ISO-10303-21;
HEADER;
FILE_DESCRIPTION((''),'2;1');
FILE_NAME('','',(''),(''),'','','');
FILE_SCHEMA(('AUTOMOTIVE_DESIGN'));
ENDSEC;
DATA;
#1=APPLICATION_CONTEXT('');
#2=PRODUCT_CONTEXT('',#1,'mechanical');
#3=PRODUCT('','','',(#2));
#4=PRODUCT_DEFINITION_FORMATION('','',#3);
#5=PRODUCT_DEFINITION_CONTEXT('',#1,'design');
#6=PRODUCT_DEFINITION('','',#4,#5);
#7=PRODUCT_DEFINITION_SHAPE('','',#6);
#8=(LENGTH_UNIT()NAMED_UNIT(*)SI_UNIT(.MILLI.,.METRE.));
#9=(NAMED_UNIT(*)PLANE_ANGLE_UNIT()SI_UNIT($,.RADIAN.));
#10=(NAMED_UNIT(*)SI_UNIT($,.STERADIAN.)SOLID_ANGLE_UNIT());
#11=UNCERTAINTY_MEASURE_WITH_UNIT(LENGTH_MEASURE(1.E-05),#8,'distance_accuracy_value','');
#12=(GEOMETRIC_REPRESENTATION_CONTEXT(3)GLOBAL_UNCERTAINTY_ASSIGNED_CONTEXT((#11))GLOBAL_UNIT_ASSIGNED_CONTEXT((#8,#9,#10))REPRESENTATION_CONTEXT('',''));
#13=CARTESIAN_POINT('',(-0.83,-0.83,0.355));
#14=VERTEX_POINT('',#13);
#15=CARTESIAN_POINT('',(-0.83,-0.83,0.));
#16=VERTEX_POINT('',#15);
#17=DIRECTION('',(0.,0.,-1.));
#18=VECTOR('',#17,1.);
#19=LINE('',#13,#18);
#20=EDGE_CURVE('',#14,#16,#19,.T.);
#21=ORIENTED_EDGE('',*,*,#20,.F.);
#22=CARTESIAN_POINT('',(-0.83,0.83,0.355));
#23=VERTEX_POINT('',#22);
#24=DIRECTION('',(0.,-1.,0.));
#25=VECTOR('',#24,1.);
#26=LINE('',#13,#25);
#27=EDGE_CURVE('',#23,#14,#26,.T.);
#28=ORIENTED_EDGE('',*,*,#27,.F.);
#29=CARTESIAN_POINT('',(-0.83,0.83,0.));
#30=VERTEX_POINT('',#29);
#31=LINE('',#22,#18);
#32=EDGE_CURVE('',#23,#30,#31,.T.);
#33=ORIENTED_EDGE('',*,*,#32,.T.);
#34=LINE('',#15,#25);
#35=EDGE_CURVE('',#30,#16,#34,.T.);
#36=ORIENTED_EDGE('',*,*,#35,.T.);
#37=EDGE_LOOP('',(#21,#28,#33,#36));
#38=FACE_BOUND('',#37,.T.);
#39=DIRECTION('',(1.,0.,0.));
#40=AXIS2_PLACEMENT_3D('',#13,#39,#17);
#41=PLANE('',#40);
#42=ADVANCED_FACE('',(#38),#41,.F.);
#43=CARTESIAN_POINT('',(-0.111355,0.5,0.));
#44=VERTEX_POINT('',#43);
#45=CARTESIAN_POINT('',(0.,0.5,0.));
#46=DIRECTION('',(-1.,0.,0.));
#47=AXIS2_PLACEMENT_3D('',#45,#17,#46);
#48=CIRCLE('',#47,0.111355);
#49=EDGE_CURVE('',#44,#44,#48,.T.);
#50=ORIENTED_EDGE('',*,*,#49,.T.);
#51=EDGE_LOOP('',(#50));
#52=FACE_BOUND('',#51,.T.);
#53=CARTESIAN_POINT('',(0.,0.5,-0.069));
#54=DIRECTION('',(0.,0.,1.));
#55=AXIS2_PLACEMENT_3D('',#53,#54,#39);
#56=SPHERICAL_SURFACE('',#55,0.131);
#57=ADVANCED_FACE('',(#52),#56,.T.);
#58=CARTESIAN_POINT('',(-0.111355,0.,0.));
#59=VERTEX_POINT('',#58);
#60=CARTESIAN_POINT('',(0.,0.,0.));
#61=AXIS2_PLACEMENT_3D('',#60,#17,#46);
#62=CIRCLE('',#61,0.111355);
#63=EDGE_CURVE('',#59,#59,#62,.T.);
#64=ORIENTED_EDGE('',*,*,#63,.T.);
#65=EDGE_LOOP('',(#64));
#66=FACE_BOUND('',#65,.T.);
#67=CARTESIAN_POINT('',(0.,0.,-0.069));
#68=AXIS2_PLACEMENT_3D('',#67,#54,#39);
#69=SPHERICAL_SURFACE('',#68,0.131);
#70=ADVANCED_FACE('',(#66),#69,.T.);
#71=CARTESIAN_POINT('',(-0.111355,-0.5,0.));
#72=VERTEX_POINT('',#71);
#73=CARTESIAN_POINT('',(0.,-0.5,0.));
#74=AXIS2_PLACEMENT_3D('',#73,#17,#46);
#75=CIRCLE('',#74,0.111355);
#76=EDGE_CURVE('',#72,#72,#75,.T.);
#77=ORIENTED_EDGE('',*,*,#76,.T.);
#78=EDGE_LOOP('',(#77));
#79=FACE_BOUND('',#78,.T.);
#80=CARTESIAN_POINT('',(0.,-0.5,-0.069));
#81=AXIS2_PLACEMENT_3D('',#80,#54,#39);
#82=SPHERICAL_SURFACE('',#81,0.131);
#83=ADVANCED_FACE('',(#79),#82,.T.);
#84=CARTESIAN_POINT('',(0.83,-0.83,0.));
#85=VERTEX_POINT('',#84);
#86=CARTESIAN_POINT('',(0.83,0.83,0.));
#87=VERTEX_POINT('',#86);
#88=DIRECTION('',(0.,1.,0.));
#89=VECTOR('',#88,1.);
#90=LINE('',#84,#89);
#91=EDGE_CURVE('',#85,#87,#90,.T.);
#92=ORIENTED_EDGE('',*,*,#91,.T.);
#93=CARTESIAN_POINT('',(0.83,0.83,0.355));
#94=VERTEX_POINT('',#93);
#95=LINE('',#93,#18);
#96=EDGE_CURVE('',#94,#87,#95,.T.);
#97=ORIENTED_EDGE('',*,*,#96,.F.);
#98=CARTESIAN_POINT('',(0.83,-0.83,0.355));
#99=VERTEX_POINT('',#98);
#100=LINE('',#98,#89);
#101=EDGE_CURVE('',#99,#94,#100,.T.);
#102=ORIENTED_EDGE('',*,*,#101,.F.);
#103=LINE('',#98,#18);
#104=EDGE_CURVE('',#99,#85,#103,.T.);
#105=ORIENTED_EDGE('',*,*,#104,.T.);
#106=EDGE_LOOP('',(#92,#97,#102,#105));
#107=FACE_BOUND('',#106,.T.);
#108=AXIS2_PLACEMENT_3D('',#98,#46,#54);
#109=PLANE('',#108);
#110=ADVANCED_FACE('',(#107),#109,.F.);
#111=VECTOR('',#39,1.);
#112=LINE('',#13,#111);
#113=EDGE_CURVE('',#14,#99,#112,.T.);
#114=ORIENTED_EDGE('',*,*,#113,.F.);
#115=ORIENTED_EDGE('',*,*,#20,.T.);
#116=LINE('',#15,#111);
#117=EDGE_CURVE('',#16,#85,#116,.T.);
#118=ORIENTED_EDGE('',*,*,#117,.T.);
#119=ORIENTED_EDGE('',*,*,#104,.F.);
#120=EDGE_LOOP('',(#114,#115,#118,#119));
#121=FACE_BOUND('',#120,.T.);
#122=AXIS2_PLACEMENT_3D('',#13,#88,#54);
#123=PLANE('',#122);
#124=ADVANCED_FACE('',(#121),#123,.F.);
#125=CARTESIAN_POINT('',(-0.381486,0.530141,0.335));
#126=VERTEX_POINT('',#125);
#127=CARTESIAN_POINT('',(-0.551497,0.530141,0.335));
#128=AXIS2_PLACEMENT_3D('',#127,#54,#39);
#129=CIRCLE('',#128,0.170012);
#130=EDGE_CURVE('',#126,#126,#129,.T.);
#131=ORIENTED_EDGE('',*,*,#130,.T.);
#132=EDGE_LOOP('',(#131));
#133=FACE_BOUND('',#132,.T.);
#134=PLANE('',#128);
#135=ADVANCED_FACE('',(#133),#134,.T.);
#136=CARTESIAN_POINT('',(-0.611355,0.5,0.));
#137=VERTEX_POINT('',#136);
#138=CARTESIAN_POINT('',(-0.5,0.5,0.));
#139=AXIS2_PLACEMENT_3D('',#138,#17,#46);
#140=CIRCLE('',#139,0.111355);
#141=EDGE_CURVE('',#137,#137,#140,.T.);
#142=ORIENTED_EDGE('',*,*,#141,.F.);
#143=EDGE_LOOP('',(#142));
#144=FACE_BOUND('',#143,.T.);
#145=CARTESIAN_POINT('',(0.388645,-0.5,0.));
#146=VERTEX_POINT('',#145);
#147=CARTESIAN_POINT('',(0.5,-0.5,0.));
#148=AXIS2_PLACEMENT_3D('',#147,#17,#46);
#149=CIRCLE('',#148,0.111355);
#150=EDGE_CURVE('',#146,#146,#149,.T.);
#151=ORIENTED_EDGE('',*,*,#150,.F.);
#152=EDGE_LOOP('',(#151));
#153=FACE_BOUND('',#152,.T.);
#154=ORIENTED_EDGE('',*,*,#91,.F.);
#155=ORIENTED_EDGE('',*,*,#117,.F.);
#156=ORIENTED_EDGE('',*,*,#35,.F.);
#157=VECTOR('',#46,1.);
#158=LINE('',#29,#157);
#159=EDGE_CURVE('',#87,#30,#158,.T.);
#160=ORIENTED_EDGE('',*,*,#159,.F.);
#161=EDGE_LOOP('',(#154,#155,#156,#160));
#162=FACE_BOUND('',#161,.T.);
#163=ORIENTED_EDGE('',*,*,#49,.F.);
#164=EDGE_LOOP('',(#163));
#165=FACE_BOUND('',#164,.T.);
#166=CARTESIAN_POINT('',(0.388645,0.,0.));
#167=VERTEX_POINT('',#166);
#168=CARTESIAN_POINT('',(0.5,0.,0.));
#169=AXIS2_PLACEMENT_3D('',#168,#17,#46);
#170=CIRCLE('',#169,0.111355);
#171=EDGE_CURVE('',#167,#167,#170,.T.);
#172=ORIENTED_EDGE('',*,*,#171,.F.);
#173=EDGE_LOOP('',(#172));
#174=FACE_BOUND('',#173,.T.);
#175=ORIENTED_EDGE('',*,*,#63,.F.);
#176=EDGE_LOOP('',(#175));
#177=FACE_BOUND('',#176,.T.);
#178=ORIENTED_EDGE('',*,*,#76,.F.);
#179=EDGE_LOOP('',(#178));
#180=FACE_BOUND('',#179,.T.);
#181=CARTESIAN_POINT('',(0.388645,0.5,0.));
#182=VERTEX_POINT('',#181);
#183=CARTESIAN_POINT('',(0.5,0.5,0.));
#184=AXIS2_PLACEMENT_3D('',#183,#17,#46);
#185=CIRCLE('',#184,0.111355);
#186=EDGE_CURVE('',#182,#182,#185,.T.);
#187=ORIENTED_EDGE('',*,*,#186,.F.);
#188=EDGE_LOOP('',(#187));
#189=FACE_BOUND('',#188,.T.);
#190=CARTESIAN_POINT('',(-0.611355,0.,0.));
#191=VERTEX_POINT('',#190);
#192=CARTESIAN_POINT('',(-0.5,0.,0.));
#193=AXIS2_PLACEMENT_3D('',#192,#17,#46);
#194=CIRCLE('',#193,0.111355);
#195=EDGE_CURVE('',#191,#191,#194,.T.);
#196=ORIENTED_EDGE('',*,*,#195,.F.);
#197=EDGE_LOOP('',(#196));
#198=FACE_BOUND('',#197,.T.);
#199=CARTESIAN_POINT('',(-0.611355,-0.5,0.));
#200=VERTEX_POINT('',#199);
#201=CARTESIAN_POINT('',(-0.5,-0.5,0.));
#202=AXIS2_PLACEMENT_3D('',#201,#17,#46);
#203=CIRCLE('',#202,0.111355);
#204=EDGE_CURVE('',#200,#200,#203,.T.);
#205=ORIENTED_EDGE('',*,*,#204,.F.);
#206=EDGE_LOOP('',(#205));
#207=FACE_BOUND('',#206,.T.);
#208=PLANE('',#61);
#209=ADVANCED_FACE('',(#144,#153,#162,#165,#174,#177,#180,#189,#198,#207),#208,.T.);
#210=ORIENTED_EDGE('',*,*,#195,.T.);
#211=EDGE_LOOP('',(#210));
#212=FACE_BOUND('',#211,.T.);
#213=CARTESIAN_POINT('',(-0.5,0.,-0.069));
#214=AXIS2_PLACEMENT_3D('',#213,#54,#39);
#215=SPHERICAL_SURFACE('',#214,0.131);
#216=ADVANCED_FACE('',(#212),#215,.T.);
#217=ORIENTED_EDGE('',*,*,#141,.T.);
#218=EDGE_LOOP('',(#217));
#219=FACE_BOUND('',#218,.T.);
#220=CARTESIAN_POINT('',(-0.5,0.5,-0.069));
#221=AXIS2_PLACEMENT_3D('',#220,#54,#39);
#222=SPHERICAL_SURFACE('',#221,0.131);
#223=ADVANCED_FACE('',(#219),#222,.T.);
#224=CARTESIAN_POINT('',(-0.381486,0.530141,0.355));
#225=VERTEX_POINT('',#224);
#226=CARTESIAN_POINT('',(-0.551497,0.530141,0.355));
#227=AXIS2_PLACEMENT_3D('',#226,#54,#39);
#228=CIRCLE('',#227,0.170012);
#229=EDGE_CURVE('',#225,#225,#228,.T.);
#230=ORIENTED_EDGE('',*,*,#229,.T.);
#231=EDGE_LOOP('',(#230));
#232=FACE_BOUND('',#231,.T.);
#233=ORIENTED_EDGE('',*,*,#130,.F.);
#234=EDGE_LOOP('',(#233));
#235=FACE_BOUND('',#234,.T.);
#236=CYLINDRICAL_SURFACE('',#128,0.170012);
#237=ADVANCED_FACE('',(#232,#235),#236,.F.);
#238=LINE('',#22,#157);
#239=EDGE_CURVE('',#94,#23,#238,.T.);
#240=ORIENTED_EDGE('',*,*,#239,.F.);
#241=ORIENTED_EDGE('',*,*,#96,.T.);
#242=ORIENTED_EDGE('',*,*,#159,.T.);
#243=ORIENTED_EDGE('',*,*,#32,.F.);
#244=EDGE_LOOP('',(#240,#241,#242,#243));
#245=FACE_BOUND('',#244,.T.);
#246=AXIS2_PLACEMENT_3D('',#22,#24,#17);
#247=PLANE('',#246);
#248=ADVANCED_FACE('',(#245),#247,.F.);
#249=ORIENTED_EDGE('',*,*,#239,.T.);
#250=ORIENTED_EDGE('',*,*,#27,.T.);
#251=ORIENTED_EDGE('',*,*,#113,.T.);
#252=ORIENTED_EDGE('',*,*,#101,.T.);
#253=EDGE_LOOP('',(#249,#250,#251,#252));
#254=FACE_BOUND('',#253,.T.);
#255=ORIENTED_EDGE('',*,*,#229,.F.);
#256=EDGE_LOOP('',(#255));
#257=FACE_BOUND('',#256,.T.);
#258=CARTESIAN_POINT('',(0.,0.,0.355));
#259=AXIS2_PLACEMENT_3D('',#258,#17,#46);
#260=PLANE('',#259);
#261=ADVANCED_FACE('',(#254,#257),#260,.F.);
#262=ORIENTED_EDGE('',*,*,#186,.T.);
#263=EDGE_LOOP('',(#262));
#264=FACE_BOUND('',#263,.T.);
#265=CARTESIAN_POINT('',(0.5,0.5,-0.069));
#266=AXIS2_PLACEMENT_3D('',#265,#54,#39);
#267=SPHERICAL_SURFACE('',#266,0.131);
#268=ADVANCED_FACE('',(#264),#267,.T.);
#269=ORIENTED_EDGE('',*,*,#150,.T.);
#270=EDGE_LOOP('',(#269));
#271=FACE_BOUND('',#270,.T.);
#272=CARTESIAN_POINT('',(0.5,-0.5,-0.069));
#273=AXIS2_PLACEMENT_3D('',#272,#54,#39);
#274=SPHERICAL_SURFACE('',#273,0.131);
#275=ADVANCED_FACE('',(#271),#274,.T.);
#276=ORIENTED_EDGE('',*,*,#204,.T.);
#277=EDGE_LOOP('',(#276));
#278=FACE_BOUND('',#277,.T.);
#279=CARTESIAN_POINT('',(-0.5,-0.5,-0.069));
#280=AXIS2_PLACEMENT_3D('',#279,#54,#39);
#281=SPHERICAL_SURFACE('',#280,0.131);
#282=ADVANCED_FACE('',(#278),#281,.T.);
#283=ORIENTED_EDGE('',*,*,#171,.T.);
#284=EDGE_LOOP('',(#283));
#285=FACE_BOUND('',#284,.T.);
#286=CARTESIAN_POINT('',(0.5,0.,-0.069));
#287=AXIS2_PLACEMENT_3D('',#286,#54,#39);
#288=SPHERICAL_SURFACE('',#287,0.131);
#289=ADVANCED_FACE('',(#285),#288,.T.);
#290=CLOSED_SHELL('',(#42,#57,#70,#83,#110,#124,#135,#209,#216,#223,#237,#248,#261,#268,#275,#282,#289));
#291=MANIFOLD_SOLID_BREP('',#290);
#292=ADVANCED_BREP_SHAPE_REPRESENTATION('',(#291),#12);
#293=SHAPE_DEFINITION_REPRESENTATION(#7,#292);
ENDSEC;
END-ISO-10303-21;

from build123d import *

# Parameters (mm, degrees)
SKETCH1_W           = 1.66
SKETCH1_H           = 1.66
BOSS_EXTRUDE1_DEPTH = 0.355
LPATTERN1_COUNT     = 2
LPATTERN1_PITCH     = 0.5
LPATTERN1_COL_COUNT = 2
LPATTERN1_COL_PITCH = 0.5
SKETCH3_R           = 0.170011755
CUT_EXTRUDE1_DEPTH  = 0.02


with BuildPart() as part:
    # Sketch1 → Boss-Extrude1 (new body)
    with BuildSketch(Plane.XY):
        Rectangle(SKETCH1_W, SKETCH1_H)
    extrude(amount=BOSS_EXTRUDE1_DEPTH)

    # Sketch2 → Revolve1 (revolve)
    with BuildSketch(Plane(origin=(0, 0, 0), x_dir=(1, 0, 0), z_dir=(0, 1, 0))):
        with BuildLine():
            Line((0, 0.2), (0, 0))
            Line((0, 0), (0.111355287, 0))
            ThreePointArc((0.111355287, 0), (0.114455231, 0.132725976), (0, 0.2))
        make_face()
    revolve1 = revolve(axis=Axis((0, 0, 0), (0, 0, -1)))

    # LPattern1: Revolve1 ×2
    with Locations(*[(0, i * LPATTERN1_PITCH, 0) for i in range(1, LPATTERN1_COUNT)]):
        add(revolve1)

    # LPattern1 col: Revolve1 ×2
    with Locations(*[(0, -i * LPATTERN1_COL_PITCH, 0) for i in range(1, LPATTERN1_COL_COUNT)]):
        add(revolve1)

    # LPattern2 copy 1 sketch → LPattern2 copy 1 (revolve)
    with BuildSketch(Plane(origin=(0.5, 0.5, 0), x_dir=(1, 0, 0), z_dir=(0, 1, 0))):
        with BuildLine():
            Line((0, 0.2), (0, 0))
            Line((0, 0), (0.111355287, 0))
            ThreePointArc((0.111355287, 0), (0.114455231, 0.132725976), (0, 0.2))
        make_face()
    revolve(axis=Axis((0.5, 0.5, 0), (0, 0, -1)))

    # LPattern2 copy 2 sketch → LPattern2 copy 2 (revolve)
    with BuildSketch(Plane(origin=(0.5, -0.5, 0), x_dir=(1, 0, 0), z_dir=(0, 1, 0))):
        with BuildLine():
            Line((0, 0.2), (0, 0))
            Line((0, 0), (0.111355287, 0))
            ThreePointArc((0.111355287, 0), (0.114455231, 0.132725976), (0, 0.2))
        make_face()
    revolve(axis=Axis((0.5, -0.5, 0), (0, 0, -1)))

    # LPattern2 copy 3 sketch → LPattern2 copy 3 (revolve)
    with BuildSketch(Plane(origin=(0.5, 0, 0), x_dir=(1, 0, 0), z_dir=(0, 1, 0))):
        with BuildLine():
            Line((0, 0.2), (0, 0))
            Line((0, 0), (0.111355287, 0))
            ThreePointArc((0.111355287, 0), (0.114455231, 0.132725976), (0, 0.2))
        make_face()
    revolve(axis=Axis((0.5, 0, 0), (0, 0, -1)))

    # LPattern3 copy 1 sketch → LPattern3 copy 1 (revolve)
    with BuildSketch(Plane(origin=(-0.5, 0.5, 0), x_dir=(1, 0, 0), z_dir=(0, 1, 0))):
        with BuildLine():
            Line((0, 0.2), (0, 0))
            Line((0, 0), (0.111355287, 0))
            ThreePointArc((0.111355287, 0), (0.114455231, 0.132725976), (0, 0.2))
        make_face()
    revolve(axis=Axis((-0.5, 0.5, 0), (0, 0, -1)))

    # LPattern3 copy 2 sketch → LPattern3 copy 2 (revolve)
    with BuildSketch(Plane(origin=(-0.5, -0.5, 0), x_dir=(1, 0, 0), z_dir=(0, 1, 0))):
        with BuildLine():
            Line((0, 0.2), (0, 0))
            Line((0, 0), (0.111355287, 0))
            ThreePointArc((0.111355287, 0), (0.114455231, 0.132725976), (0, 0.2))
        make_face()
    revolve(axis=Axis((-0.5, -0.5, 0), (0, 0, -1)))

    # LPattern3 copy 3 sketch → LPattern3 copy 3 (revolve)
    with BuildSketch(Plane(origin=(-0.5, 0, 0), x_dir=(1, 0, 0), z_dir=(0, 1, 0))):
        with BuildLine():
            Line((0, 0.2), (0, 0))
            Line((0, 0), (0.111355287, 0))
            ThreePointArc((0.111355287, 0), (0.114455231, 0.132725976), (0, 0.2))
        make_face()
    revolve(axis=Axis((-0.5, 0, 0), (0, 0, -1)))

    # Sketch3 → Cut-Extrude1 (cut)
    with BuildSketch(Plane.XY.offset(0.355)):
        with Locations((-0.551497324, 0.530141066)):
            Circle(SKETCH3_R)
    extrude(amount=-CUT_EXTRUDE1_DEPTH, mode=Mode.SUBTRACT)


solid = part.part
